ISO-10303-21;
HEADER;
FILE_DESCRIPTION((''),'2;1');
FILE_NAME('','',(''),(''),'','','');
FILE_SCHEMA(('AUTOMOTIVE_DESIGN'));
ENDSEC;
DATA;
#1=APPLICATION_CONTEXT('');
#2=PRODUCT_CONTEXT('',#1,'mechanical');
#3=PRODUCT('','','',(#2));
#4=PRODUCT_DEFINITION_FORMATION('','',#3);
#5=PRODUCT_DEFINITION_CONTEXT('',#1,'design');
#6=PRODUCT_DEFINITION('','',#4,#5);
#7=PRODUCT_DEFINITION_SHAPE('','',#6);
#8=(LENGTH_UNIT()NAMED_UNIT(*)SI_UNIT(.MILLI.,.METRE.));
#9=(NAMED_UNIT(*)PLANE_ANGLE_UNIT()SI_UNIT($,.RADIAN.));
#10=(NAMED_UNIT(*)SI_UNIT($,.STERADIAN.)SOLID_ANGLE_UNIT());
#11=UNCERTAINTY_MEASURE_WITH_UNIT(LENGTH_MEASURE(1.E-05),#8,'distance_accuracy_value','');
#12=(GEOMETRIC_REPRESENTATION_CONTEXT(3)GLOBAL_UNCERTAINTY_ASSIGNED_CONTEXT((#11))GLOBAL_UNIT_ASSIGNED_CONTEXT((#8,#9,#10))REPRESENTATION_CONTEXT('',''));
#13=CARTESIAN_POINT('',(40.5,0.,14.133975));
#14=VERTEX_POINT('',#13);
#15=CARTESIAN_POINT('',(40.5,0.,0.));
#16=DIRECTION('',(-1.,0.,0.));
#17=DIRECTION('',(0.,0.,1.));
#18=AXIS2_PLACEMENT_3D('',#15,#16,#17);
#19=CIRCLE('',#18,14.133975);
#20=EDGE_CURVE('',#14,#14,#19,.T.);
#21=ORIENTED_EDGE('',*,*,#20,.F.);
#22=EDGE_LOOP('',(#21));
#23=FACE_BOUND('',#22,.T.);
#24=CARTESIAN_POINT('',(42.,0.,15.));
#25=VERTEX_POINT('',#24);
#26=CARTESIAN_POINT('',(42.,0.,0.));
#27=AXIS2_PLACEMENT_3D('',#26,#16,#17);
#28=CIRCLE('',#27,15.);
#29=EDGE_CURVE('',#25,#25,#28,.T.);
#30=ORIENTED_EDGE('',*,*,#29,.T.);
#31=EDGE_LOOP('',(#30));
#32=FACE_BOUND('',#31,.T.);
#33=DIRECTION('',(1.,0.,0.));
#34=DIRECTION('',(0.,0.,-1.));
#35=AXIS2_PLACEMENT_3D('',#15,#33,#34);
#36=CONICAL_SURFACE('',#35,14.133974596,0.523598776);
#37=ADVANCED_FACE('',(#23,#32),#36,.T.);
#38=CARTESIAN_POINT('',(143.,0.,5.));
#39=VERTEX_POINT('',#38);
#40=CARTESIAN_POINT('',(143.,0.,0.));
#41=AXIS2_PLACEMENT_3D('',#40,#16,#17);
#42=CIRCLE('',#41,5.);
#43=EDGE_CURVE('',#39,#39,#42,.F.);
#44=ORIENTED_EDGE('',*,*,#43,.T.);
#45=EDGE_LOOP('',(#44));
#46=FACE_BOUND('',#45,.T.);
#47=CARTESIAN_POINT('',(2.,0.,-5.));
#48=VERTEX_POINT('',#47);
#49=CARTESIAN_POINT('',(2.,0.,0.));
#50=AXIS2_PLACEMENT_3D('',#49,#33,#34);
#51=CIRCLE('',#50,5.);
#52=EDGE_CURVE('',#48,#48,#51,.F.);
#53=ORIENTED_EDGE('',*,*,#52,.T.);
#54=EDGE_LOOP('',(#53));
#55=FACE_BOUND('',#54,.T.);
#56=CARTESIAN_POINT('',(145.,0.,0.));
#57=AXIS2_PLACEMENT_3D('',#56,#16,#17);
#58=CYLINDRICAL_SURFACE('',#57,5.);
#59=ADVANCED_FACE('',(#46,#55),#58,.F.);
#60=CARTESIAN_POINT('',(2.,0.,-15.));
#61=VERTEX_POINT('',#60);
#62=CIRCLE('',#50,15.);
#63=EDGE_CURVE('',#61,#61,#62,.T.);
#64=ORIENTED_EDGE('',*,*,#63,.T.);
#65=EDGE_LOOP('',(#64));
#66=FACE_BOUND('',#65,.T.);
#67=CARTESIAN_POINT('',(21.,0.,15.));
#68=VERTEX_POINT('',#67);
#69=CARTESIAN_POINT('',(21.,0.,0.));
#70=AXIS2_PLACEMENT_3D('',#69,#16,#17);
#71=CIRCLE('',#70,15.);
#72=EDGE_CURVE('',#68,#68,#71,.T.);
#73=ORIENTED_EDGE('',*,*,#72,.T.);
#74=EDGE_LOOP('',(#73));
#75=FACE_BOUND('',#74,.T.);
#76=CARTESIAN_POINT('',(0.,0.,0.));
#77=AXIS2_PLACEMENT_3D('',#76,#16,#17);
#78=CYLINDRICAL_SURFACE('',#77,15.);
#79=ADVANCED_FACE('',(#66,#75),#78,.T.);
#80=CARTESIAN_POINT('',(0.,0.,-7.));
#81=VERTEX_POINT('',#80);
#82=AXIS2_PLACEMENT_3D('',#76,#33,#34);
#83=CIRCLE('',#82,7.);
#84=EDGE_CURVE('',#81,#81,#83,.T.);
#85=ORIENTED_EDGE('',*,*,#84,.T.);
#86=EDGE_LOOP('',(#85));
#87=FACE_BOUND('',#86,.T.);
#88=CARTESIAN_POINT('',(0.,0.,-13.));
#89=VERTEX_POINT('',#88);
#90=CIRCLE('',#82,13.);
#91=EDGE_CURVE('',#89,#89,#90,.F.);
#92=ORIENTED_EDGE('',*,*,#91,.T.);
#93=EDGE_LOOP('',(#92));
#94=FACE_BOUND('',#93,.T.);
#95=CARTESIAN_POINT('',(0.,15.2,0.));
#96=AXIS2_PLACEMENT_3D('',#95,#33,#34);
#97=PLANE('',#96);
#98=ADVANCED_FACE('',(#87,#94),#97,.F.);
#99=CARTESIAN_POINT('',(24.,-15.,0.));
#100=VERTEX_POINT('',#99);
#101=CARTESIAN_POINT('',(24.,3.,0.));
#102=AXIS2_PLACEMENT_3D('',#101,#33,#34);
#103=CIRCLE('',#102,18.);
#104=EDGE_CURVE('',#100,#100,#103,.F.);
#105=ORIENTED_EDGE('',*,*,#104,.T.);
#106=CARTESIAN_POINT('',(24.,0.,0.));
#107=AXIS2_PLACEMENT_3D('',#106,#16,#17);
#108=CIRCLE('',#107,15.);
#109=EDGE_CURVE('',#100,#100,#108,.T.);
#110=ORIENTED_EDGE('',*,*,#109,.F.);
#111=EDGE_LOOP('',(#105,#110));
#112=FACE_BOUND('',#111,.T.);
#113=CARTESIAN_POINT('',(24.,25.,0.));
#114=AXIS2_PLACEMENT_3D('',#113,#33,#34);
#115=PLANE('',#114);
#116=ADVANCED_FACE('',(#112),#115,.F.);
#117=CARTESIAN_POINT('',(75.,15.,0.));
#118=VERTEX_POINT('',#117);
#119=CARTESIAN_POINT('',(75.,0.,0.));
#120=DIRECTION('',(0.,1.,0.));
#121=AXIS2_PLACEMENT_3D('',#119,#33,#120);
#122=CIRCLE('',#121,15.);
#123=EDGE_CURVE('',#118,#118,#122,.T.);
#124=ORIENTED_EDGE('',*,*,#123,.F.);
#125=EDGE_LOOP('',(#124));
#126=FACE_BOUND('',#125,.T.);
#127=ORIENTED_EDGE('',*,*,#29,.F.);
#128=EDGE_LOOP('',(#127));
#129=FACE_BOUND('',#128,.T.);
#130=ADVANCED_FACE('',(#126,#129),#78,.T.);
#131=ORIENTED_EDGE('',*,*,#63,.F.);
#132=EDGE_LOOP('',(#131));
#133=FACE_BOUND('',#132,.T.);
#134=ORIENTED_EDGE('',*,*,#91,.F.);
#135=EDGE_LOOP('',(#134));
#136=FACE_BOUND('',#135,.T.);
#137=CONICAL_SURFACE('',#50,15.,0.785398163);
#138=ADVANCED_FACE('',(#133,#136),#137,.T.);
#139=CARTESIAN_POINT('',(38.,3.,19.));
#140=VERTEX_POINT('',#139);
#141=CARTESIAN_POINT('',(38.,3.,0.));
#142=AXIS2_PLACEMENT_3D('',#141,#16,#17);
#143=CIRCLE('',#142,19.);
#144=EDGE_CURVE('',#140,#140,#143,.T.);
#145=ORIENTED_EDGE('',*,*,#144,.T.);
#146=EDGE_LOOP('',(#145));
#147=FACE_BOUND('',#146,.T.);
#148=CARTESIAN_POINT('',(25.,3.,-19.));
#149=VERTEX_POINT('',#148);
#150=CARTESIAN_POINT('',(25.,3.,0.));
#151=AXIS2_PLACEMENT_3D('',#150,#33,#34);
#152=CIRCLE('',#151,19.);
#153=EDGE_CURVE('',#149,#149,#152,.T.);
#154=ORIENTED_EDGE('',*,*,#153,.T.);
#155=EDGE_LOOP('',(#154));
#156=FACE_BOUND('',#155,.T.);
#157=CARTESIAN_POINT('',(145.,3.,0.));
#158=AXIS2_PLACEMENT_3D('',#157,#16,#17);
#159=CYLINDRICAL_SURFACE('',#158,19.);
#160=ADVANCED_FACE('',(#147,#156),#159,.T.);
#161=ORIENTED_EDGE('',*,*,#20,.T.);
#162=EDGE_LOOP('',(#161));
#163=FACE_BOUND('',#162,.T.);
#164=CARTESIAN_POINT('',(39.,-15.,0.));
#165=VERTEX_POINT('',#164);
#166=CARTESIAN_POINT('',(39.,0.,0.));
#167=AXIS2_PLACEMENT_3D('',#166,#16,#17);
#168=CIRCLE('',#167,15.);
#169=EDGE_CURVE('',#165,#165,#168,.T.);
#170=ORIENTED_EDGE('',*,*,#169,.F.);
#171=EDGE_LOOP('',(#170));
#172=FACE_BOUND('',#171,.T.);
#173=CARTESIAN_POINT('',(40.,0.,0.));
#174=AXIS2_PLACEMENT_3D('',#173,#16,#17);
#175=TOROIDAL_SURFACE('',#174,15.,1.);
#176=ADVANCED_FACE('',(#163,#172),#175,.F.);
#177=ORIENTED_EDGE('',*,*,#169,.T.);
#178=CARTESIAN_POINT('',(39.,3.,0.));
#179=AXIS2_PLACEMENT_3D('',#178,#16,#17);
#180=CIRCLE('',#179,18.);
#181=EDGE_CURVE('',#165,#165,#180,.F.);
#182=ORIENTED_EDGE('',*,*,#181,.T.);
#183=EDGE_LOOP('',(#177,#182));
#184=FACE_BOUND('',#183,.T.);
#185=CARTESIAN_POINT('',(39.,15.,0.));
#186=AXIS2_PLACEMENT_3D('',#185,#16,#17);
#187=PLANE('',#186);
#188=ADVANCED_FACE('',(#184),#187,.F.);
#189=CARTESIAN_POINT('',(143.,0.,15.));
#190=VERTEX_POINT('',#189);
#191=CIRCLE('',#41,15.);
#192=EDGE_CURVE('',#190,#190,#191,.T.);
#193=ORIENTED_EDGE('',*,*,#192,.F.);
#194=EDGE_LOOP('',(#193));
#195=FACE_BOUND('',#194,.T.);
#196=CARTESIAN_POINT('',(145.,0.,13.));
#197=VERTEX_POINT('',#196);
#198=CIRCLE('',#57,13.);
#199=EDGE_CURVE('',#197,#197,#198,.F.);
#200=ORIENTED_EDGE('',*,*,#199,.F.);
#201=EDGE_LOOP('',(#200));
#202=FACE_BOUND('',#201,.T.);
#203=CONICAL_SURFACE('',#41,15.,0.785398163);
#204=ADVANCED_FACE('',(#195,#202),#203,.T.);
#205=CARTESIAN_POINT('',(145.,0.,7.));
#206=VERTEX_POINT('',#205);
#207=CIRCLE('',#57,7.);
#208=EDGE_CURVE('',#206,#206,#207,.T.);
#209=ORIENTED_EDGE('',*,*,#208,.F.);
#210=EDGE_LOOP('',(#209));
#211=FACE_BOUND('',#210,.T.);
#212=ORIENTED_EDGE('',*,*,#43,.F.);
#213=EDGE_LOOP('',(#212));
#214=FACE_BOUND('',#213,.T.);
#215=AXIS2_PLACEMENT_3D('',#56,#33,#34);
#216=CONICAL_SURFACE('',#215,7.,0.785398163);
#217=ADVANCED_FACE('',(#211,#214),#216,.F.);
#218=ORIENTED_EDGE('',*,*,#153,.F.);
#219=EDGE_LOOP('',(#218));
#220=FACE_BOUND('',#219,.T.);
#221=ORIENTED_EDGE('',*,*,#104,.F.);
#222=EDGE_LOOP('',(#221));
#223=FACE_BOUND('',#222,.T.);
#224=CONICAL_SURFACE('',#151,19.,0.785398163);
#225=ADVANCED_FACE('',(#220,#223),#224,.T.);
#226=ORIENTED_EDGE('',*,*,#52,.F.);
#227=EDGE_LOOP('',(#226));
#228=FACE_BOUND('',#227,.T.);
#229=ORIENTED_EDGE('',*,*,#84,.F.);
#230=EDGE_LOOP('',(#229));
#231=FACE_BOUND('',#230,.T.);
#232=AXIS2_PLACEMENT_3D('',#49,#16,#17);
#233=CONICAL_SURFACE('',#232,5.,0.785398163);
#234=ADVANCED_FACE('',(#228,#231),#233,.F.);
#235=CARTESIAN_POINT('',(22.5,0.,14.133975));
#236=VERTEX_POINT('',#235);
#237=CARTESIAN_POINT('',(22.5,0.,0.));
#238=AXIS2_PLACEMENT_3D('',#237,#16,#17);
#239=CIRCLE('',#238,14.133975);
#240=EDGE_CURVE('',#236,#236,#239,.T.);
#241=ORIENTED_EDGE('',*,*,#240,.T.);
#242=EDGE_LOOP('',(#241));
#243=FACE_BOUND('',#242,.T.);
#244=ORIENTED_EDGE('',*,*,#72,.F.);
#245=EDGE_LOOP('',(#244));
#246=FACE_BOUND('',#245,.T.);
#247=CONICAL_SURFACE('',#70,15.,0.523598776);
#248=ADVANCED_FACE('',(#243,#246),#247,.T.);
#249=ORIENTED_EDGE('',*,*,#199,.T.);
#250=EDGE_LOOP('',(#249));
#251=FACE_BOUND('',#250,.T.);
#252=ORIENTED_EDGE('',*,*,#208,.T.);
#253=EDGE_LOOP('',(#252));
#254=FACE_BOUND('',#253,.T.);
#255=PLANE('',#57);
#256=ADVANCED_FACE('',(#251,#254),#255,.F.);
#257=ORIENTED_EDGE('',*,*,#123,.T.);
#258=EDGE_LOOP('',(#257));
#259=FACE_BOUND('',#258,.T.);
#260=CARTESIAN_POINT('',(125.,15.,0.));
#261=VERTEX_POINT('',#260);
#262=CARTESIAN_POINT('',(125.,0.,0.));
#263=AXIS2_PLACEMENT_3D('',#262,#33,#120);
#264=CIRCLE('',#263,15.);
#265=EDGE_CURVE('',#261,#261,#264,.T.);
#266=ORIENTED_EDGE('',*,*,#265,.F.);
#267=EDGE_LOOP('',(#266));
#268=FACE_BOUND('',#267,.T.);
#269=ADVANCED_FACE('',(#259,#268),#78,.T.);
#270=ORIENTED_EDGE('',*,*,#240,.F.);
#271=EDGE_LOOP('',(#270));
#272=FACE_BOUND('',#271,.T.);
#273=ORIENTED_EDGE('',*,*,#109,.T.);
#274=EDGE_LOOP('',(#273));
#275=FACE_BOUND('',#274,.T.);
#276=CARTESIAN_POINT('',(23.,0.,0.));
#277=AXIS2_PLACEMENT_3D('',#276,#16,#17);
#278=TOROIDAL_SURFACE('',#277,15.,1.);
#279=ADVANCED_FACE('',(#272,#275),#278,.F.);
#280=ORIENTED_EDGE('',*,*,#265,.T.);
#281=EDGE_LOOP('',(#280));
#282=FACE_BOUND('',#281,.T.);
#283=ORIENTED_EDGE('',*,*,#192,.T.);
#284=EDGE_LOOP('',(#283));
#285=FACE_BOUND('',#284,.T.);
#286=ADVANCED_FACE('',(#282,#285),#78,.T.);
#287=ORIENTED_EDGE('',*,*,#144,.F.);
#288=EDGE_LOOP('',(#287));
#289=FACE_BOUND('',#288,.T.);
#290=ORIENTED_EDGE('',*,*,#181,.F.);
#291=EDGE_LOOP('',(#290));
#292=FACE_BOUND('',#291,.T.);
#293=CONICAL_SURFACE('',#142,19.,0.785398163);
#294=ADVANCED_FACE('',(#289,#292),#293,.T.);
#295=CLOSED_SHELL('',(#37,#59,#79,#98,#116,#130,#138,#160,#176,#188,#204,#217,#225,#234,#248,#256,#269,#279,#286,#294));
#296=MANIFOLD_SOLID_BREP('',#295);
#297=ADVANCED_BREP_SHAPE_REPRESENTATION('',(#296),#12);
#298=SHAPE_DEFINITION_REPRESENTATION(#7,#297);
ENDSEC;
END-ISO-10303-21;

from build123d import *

# Parameters (mm, degrees)
CUT_EXTRUDE1_DEPTH      = 127.059509756
CUT_EXTRUDE1_DEPTH_BACK = 127.059509756
SKETCH3_OUTSIDE_W       = 84.264
SKETCH3_OUTSIDE_H       = 84.264
SKETCH3_OUTSIDE_R       = 19
CHAMFER1_SIZE           = 1
CUT_EXTRUDE2_DEPTH      = 148.885090526
CUT_EXTRUDE2_DEPTH_BACK = 148.885090526
SKETCH6_R               = 5
CHAMFER3_SIZE           = 2


with BuildPart() as part:
    # Sketch2 → Revolve1 (revolve)
    with BuildSketch(Plane.XY, mode=Mode.PRIVATE) as revolve1_sk:
        Polygon((0, 0), (145, 0), (145, 15), (39, 15), (39, 25), (24, 25), (24, 15.2), (0, 15.2), align=None)
    revolve(revolve1_sk.sketch.rotate(Axis((0, 0, 0), (1, 0, 0)), 90), axis=Axis((0, 0, 0), (1, 0, 0)))

    # Sketch3 outside → Cut-Extrude1 (cut, two sides: drawn at the far end of the back side and taken through both)
    with BuildSketch(Plane.ZY.offset(-24).offset(-CUT_EXTRUDE1_DEPTH_BACK)):
        Rectangle(SKETCH3_OUTSIDE_W, SKETCH3_OUTSIDE_H)
        with Locations((0, 3)):
            Circle(SKETCH3_OUTSIDE_R, mode=Mode.SUBTRACT)
    extrude(amount=CUT_EXTRUDE1_DEPTH + CUT_EXTRUDE1_DEPTH_BACK, mode=Mode.SUBTRACT)

    # Sketch4 → Cut-Revolve1 (revolve, cut)
    with BuildSketch(Plane.XY, mode=Mode.PRIVATE) as cut_revolve1_sk:
        with BuildLine():
            Line((-1.227130196, 15), (21, 15))
            Line((21, 15), (22.5, 14.133974596))
            ThreePointArc((22.5, 14.133974596), (23.5, 14.133974596), (24, 15))
            Line((24, 15), (24, 19.086801748))
            Line((24, 19.086801748), (-1.227130196, 19.086801748))
            Line((-1.227130196, 19.086801748), (-1.227130196, 15))
        make_face()
        with BuildLine():
            Line((147.328192088, 15), (42, 15))
            Line((42, 15), (40.5, 14.133974596))
            ThreePointArc((40.5, 14.133974596), (39.5, 14.133974596), (39, 15))
            Line((39, 15), (39, 21.506103324))
            Line((39, 21.506103324), (147.328192088, 21.506103324))
            Line((147.328192088, 21.506103324), (147.328192088, 15))
        make_face()
    revolve(cut_revolve1_sk.sketch.rotate(Axis((0, 0, 0), (1, 0, 0)), 90), axis=Axis((0, 0, 0), (1, 0, 0)), mode=Mode.SUBTRACT)

    # Chamfer1
    chamfer1_edges = [part.edges().sort_by_distance(p)[0] for p in [
        (39, 3, -19),
        (24, 3, -19),
    ]]
    chamfer(chamfer1_edges, length=CHAMFER1_SIZE - 0.0001)  # a hair under: the kernel refuses the full size

    # Sketch6 → Cut-Extrude2 (cut, two sides: drawn at the far end of the back side and taken through both)
    with BuildSketch(Plane.ZY.offset(-CUT_EXTRUDE2_DEPTH_BACK)):
        Circle(SKETCH6_R)
    extrude(amount=CUT_EXTRUDE2_DEPTH + CUT_EXTRUDE2_DEPTH_BACK, mode=Mode.SUBTRACT)

    # Chamfer3
    chamfer3_edges = [part.edges().sort_by_distance(p)[0] for p in [
        (0, 0, -15),
        (145, 0, -5),
        (0, 0, -5),
        (145, 0, -15),
    ]]
    chamfer(chamfer3_edges, length=CHAMFER3_SIZE)


solid = part.part
